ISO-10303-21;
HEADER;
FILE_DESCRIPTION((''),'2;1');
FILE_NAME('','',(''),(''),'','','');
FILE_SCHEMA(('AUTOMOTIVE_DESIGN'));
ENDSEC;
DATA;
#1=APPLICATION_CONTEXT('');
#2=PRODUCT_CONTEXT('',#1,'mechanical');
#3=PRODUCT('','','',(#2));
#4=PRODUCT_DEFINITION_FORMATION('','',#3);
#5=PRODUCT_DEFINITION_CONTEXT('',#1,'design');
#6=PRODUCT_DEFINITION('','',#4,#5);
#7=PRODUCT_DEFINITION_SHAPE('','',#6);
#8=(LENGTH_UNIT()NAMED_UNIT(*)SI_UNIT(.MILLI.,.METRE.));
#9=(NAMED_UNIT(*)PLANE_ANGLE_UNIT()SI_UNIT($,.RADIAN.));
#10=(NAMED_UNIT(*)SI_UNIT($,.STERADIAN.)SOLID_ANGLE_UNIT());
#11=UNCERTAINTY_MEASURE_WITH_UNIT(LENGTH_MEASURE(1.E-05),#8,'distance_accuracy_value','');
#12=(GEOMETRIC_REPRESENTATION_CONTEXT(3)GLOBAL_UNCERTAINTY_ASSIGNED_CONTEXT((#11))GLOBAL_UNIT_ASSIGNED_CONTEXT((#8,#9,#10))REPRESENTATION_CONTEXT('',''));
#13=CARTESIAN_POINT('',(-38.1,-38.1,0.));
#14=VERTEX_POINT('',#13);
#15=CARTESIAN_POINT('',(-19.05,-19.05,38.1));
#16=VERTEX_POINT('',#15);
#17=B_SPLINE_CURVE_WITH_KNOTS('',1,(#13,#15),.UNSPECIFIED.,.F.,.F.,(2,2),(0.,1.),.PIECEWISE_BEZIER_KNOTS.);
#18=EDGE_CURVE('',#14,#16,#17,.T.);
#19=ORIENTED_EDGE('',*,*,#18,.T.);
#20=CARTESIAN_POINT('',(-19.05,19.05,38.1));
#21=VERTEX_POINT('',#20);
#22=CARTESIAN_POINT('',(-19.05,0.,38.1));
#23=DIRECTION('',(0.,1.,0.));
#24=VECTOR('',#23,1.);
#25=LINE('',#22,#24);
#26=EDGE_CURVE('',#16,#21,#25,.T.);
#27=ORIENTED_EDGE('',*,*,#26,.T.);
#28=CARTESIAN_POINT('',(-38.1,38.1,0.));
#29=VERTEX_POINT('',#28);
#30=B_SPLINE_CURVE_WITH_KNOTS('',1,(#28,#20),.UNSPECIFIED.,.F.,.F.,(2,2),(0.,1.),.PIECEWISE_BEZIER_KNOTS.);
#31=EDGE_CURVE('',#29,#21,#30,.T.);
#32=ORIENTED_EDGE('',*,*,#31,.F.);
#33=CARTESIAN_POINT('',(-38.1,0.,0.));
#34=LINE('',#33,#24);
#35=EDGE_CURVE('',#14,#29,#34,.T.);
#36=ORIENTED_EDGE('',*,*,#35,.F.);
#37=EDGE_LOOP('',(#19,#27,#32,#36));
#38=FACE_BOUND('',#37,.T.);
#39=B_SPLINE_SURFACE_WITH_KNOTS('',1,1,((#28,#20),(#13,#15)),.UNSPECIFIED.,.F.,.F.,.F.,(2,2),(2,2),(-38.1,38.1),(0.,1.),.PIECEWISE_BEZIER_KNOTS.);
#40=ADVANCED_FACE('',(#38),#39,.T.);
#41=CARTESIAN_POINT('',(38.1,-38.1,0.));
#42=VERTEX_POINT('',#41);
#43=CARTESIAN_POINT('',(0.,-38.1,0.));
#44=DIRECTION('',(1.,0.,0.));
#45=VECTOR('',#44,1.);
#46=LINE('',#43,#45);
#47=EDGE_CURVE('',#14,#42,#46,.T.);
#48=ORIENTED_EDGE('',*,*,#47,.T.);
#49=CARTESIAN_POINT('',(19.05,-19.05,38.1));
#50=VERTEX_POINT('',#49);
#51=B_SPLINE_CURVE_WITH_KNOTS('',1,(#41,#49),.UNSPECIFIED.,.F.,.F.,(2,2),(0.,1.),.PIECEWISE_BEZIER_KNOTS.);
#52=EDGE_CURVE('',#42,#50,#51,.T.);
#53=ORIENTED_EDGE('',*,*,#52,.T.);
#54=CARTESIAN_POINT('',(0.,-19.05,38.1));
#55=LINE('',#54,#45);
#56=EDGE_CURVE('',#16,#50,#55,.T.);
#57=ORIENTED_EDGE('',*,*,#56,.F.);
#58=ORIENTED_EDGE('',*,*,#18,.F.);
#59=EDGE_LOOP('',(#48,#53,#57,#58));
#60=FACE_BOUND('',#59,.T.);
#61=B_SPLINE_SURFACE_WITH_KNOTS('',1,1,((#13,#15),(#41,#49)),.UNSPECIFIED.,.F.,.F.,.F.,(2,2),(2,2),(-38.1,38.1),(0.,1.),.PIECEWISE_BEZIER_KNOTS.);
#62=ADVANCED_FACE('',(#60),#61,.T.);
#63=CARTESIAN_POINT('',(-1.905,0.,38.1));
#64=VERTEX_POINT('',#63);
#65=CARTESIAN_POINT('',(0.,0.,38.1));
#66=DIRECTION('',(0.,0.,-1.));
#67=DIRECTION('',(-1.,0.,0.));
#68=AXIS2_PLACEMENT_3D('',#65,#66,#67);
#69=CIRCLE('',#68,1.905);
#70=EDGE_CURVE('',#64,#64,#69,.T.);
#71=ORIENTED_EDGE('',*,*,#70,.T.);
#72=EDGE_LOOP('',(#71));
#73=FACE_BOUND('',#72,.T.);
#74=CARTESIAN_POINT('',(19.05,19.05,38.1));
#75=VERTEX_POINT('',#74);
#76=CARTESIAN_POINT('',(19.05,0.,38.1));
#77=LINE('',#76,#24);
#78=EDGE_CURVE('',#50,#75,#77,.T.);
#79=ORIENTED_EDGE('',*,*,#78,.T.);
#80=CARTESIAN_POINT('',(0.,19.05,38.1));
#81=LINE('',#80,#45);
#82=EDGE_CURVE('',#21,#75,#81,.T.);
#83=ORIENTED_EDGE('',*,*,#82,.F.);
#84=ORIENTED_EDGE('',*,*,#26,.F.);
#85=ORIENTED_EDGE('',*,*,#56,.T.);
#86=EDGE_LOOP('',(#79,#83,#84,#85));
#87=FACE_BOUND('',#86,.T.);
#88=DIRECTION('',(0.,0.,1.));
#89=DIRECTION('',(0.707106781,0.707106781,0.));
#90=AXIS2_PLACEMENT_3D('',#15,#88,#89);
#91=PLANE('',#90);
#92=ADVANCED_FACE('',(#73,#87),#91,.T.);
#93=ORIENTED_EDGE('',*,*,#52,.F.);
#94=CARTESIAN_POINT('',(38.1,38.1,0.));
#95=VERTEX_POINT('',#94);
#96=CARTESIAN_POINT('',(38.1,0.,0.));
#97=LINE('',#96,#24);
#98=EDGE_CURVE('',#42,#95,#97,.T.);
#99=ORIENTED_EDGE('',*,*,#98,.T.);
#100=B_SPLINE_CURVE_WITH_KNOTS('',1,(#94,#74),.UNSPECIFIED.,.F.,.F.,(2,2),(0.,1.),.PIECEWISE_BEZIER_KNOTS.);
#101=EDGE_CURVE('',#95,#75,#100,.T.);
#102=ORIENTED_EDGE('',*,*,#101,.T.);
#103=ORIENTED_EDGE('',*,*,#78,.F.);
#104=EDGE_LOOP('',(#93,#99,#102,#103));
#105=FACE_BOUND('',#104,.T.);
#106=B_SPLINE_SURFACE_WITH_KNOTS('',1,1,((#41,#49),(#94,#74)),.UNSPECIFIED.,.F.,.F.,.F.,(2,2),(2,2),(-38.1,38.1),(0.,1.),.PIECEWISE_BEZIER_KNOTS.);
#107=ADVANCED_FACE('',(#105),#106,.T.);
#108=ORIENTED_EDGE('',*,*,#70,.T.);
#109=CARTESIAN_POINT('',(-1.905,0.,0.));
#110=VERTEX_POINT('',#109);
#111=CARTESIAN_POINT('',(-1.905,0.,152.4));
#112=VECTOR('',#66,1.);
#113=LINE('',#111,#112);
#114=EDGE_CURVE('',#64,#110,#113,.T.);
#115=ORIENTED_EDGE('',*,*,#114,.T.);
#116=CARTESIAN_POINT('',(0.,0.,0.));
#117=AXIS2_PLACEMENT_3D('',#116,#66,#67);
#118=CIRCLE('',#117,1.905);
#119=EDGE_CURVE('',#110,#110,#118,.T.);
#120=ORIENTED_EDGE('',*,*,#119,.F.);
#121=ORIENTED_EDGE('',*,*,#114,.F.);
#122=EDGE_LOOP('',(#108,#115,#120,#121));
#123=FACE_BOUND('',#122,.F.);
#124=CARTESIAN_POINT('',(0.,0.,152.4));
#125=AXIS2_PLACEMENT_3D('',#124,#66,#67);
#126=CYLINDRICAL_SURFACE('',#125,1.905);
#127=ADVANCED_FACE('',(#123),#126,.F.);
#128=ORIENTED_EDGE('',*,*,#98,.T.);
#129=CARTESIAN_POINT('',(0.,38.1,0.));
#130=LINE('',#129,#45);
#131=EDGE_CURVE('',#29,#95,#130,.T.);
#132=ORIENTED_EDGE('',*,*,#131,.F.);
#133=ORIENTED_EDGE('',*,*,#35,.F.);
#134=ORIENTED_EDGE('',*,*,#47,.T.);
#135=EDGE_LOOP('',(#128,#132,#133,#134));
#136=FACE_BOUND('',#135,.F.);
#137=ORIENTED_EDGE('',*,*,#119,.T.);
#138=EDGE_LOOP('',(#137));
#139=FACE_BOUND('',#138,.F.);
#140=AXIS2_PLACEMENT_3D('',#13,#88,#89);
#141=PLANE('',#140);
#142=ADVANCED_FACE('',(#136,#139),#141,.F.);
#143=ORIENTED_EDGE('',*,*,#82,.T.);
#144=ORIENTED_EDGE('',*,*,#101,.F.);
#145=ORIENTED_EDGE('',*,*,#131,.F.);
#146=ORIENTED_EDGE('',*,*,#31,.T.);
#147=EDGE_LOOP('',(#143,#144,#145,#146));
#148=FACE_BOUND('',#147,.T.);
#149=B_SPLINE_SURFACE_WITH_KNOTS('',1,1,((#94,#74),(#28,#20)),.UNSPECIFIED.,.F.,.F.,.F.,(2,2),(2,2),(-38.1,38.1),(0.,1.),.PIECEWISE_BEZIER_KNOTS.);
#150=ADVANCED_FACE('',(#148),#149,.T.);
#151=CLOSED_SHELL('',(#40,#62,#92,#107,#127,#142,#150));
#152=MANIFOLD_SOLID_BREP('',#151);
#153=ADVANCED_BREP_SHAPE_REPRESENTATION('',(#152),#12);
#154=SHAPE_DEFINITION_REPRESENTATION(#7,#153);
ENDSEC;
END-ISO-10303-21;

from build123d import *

# Parameters (mm, degrees)
F0_W  = 76.2
F0_H  = 76.2
F2_W  = 38.1
F2_H  = 38.1
F4_W  = 38.1
F4_H  = 38.1
F8_D  = 3.81
F10_D = 3.81


with BuildPart() as f3:
    # F0 (on Top) → F3 section 0
    with BuildSketch(Plane.XY):
        Rectangle(F0_W, F0_H)
    # F2 (on offset) → F3 section 1
    with BuildSketch(Plane.XY.offset(38.1)):
        Rectangle(F2_W, F2_H)
    loft()

    # F10 (through all)
    with Locations(Plane.XY.offset(38.1)):
        with Locations((0, 0)):
            Hole(F10_D / 2)


with BuildPart() as f6:
    # F4 (on offset) → F6 section 0
    with BuildSketch(Plane.XY.offset(38.1), mode=Mode.PRIVATE) as f6_s0:
        Rectangle(F4_W, F4_H)
    loft([f6_s0.sketch, Vertex(0, 0, 76.5771791339)])

    # F8 (through all)
    with Locations(Plane(origin=(0, 0, 38.1), x_dir=(1, 0, 0), z_dir=(0, 0, -1))):
        with Locations((0, 0)):
            Hole(F8_D / 2)


solid = f3.part
